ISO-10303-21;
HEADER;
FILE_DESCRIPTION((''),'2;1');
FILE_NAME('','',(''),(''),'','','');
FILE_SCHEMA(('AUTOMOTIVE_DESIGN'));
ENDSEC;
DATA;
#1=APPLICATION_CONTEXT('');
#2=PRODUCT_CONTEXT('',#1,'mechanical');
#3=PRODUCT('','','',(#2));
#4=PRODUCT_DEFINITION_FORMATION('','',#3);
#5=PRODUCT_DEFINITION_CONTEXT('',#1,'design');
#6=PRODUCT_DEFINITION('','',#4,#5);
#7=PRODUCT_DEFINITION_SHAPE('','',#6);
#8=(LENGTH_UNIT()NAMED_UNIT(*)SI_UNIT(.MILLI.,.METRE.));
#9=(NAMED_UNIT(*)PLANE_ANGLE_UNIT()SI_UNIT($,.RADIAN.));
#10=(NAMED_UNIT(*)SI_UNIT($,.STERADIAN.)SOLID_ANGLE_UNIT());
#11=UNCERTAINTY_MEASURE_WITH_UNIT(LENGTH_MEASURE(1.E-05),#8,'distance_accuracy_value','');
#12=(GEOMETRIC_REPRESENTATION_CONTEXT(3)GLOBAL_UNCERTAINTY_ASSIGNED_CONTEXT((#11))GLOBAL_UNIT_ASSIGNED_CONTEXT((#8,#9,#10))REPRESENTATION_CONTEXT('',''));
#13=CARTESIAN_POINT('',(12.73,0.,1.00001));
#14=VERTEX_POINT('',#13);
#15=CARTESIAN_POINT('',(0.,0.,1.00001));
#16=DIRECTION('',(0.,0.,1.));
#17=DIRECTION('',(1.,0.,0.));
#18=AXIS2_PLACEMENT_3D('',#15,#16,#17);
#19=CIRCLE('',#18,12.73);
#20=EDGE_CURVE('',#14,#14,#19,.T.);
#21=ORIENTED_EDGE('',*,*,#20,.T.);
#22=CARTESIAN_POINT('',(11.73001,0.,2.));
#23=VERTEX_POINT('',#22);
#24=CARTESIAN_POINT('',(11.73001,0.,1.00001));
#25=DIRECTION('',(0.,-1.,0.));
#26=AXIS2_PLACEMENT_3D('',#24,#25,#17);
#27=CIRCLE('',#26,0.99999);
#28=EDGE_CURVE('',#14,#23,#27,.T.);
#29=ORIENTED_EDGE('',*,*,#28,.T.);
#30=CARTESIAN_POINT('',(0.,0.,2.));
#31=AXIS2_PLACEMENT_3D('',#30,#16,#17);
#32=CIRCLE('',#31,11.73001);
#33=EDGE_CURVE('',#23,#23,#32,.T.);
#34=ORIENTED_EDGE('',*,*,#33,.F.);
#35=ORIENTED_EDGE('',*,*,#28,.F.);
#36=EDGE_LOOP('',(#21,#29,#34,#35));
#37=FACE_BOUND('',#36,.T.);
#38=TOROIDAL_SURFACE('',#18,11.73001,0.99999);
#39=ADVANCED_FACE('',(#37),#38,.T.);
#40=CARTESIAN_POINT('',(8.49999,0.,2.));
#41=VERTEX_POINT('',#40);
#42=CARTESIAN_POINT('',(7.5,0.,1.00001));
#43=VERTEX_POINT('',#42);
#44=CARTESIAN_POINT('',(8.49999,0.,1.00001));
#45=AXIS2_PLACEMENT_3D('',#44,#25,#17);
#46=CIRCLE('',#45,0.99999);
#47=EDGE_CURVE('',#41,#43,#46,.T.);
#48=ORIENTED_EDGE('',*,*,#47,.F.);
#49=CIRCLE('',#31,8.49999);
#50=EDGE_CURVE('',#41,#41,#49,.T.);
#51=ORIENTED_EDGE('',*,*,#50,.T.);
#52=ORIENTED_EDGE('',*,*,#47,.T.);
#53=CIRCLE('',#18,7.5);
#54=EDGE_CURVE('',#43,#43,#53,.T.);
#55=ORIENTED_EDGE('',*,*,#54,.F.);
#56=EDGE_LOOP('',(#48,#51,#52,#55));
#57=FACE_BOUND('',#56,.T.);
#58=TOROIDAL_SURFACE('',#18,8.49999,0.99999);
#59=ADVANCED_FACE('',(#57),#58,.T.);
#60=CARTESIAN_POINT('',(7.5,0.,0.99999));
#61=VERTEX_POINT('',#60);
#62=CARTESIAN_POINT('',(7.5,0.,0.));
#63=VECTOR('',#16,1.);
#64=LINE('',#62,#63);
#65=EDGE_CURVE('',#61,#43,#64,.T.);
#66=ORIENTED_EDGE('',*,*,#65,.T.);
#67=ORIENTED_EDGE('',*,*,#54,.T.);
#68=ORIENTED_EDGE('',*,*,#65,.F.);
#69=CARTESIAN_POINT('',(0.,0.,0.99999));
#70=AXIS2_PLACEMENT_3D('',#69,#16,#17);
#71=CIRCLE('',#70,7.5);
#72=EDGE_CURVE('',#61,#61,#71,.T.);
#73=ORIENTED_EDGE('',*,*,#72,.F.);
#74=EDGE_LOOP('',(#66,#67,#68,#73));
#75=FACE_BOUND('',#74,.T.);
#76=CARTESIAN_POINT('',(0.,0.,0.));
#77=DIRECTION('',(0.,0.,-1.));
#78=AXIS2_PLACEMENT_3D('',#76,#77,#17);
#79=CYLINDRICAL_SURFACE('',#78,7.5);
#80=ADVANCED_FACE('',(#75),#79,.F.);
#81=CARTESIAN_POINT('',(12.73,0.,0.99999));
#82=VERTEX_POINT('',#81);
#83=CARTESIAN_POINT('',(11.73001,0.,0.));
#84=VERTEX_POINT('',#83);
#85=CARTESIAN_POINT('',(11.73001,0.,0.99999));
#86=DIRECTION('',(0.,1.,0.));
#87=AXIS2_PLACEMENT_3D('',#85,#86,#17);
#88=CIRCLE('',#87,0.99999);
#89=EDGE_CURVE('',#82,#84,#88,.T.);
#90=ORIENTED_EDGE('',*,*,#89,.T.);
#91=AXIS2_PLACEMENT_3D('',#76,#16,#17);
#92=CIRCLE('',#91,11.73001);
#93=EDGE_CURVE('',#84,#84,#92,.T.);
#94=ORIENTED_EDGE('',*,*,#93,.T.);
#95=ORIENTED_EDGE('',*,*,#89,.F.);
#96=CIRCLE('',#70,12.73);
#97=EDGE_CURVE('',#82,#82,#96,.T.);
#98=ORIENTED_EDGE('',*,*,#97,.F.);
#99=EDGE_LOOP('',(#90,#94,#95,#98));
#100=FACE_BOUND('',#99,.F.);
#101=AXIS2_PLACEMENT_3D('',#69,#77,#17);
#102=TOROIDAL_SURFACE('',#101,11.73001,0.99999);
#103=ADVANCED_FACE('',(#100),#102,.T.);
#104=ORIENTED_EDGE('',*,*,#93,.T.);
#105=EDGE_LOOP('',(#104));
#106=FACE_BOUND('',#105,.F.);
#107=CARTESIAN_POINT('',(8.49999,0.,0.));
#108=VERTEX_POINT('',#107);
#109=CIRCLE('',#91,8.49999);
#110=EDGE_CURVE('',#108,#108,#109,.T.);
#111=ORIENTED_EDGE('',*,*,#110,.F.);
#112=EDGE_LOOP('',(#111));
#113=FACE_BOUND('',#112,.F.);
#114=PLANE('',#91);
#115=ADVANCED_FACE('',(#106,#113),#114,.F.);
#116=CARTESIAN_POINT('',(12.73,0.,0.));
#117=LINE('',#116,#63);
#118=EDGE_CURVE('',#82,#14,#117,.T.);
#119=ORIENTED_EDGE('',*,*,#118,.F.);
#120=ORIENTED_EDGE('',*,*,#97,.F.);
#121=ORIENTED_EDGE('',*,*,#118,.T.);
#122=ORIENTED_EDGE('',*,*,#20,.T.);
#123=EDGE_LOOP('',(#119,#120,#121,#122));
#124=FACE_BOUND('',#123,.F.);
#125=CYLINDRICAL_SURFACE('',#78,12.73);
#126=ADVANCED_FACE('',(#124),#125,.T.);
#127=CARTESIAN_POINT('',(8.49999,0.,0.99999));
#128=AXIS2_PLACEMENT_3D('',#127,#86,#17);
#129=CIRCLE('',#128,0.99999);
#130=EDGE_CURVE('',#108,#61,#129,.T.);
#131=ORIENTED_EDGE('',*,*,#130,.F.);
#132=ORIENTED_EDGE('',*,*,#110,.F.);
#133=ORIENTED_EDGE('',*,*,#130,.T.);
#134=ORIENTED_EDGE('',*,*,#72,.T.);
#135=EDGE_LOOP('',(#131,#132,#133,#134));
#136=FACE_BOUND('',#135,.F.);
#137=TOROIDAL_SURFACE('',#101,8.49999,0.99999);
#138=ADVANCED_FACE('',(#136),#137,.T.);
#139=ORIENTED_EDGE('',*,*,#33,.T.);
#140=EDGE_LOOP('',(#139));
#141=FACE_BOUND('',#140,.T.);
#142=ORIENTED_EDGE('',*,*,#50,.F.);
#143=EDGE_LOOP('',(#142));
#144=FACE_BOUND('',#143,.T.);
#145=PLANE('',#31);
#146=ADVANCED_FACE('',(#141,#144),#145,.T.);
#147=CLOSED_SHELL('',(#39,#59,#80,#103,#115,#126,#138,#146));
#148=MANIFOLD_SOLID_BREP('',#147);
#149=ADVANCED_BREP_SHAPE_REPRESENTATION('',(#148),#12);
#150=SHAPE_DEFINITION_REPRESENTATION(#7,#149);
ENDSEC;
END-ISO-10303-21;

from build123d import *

# Parameters (mm, degrees)
F0_R     = 12.72999994
F0_R_2   = 7.5
F1_DEPTH = 2
F2_R     = 0.99999
F3_R     = 0.99999


# Not quite as in the source:
# - a fillet or chamfer is up to 0.001 mm smaller than in the source, because OpenCascade refuses the exact size


with BuildPart() as f1:
    # F0 (on Top) → F1 (new body)
    with BuildSketch(Plane.XY):
        Circle(F0_R)
        Circle(F0_R_2, mode=Mode.SUBTRACT)
    extrude(amount=F1_DEPTH)

    # F2 (radius 1 in the source; OpenCascade refuses exactly that, so slightly less here)
    f2_edges = [f1.edges().sort_by_distance(p)[0] for p in [
        (12.73, 0, 1),
        (-12.73, 0, 0),
        (-12.73, 0, 2),
    ]]
    fillet(f2_edges, radius=F2_R)

    # F3 (radius 1 in the source; OpenCascade refuses exactly that, so slightly less here)
    f3_edges = [f1.edges().sort_by_distance(p)[0] for p in [
        (7.5, 0, 1),
        (-7.5, 0, 0),
        (-7.5, 0, 2),
    ]]
    fillet(f3_edges, radius=F3_R)


solid = f1.part
